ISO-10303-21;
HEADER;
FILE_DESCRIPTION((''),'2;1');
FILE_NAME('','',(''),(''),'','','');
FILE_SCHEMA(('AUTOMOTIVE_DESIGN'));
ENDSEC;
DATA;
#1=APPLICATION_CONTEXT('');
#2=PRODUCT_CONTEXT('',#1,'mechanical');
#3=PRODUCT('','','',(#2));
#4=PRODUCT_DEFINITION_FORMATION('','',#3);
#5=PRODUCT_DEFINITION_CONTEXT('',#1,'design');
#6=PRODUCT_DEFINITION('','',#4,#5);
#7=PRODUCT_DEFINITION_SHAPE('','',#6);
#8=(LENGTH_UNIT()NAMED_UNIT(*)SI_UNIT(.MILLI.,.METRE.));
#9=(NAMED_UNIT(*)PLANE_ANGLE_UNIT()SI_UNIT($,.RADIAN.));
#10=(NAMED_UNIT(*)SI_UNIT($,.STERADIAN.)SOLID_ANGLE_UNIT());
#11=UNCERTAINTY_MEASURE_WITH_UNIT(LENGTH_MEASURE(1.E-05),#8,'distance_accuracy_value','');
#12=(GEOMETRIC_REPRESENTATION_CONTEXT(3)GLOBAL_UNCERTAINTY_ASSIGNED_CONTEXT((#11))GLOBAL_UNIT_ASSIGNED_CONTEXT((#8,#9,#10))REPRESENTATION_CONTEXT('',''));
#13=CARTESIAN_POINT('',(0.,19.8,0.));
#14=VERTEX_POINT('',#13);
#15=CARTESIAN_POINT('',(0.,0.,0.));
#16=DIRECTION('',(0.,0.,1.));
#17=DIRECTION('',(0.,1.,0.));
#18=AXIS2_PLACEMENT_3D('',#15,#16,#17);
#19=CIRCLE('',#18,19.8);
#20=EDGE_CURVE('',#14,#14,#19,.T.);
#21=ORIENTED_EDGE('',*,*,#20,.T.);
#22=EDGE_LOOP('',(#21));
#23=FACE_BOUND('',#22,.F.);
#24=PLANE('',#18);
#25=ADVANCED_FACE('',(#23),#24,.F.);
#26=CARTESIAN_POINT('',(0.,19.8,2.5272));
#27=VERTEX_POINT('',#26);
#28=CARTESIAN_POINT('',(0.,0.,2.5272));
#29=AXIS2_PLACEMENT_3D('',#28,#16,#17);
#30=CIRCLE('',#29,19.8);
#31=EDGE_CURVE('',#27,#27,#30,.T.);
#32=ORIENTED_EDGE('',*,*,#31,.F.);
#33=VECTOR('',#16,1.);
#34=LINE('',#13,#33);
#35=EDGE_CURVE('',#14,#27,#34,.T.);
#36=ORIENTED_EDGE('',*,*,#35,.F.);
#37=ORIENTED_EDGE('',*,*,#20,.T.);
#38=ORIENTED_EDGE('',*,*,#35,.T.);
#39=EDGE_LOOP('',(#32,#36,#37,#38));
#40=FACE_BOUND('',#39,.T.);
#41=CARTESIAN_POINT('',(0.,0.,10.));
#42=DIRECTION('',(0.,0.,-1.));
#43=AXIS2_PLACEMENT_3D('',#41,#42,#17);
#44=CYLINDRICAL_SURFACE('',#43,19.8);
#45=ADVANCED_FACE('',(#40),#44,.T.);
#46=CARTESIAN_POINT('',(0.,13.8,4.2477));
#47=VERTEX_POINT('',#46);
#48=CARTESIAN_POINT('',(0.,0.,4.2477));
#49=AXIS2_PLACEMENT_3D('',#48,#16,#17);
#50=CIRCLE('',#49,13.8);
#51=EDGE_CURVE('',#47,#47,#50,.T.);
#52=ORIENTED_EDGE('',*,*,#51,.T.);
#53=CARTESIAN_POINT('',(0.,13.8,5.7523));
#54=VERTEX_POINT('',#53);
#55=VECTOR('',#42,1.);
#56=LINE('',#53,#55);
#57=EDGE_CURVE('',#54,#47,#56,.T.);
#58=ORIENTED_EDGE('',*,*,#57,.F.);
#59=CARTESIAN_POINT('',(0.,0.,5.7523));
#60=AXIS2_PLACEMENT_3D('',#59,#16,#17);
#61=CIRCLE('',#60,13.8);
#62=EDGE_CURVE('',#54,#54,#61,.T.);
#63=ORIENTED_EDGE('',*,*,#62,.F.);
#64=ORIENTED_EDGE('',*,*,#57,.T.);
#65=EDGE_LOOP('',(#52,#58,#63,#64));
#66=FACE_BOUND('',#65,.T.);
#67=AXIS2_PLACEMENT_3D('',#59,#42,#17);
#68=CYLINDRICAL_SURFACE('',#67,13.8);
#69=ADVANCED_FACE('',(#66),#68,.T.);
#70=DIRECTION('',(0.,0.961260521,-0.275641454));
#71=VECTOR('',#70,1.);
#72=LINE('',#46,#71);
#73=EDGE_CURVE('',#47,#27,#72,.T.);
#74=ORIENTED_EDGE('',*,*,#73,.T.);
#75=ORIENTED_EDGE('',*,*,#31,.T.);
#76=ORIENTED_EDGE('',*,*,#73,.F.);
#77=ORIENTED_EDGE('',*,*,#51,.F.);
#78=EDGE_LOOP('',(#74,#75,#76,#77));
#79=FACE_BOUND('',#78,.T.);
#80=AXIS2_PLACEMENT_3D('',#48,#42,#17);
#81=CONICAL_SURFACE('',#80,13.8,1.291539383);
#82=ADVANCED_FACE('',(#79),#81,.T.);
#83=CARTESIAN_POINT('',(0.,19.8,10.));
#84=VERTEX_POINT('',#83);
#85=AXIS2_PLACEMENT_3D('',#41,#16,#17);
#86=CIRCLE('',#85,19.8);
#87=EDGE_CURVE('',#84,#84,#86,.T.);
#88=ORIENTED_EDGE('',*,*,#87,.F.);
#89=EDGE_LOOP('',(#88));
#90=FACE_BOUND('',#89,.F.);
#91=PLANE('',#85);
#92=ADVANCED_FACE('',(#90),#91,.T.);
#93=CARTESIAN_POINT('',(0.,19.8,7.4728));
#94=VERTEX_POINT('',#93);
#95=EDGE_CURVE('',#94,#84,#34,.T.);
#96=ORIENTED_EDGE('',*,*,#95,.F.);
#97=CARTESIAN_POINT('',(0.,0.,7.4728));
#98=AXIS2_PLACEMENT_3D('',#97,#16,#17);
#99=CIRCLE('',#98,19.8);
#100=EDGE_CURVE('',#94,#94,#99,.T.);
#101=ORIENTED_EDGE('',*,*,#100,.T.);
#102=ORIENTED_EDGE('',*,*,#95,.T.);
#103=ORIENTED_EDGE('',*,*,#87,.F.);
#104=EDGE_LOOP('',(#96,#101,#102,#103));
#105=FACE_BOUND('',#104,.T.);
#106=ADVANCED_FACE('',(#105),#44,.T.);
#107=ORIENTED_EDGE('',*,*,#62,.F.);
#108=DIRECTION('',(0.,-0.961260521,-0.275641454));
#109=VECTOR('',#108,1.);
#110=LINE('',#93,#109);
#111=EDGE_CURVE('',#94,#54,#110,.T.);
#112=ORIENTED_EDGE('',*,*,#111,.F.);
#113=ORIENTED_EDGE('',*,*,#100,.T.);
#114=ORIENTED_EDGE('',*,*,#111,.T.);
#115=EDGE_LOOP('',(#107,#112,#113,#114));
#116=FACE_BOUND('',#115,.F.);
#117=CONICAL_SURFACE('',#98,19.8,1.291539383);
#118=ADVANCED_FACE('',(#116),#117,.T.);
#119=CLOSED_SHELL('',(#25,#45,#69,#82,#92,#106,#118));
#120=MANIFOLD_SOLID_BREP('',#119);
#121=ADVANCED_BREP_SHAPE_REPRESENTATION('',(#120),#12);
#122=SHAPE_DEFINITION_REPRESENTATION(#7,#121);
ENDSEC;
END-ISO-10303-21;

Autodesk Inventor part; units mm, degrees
ref_plane "YZ Plane" through (0, 0, 0) normal (1, 0, 0) x (0, 1, 0)
ref_plane "XZ Plane" through (0, 0, 0) normal (0, 1, 0) x (-1, 0, 0)
sketch "Основной эскиз" plane through (0, 0, 0) normal (1, 0, 0) x (0, 1, 0)
  line L0 (0, 10) -> (19.8, 10)
  line L1 (19.8, 10) -> (19.8, 7.4728)
  line L2 (19.8, 7.4728) -> (13.8, 5.7523)
  line L3 (13.8, 5.7523) -> (13.8, 4.2477)
  line L4 (13.8, 4.2477) -> (19.8, 2.5272)
  line L5 (19.8, 2.5272) -> (19.8, 0)
  line L6 (19.8, 0) -> (0, 0)
  line L7 (18.5, 7.1) -> (18.5, 2.9) construction
  line L8 (13.8, 5) -> (18.5, 5) construction
  line L9 (19.8, 7.4728) -> (19.8, 2.5272)
  line L10 (0, -2) -> (0, 12) projected
  line L11 (0, 0) -> (0, 10)
  dimension "d0" = 4.2
  dimension "d1" = 32
  dimension "d2" = 1.3
  dimension "d6" = 10
  dimension "d21" = 37
  dimension "d25" = 6
  dimension "d27" = 5
ref_plane "Плоскость ремня" through (0, 13.8, 5) normal (0, 0, 1) x (1, 0, 0)
revolve "Тело" add sketch "Основной эскиз" angle 360 about axis through (0, 0, -10) along (0, 0, 1)
revolve "Канавка" cut sketch "Основной эскиз" angle 360 about axis through (0, 0, -10) along (0, 0, 1) contours L9 L4 L3 L2
fillet "Сопряжение снаружи" [suppressed]
fillet "Сопряжение изнутри" [suppressed]
pattern_of_one "Образец канавки"
equation "\"d0\" = da_Bw"
equation "\"d1\" = da_Alfa"
equation "\"d2\" = da_c"
equation "\"d21\" = da_Dw"
equation "\"d25\" = da_Hd"
equation "\"d27\" = da_Se"
equation "\"da_r1\" = 0"
equation "\"da_r2\" = 0"
equation "\"d18\" = da_Sg"
equation "\"d5\" = da_Se"
equation "\"da_Bw\" = 4.2"
equation "\"da_Alfa\" = 32deg"
equation "\"da_c\" = 1.3"
equation "\"da_Dw\" = 37"
equation "\"da_Hd\" = 6"
equation "\"da_Se\" = 5"
equation "\"da_Sg\" = 6"
properties part number "Шкив желобчатый1" material "Steel"
